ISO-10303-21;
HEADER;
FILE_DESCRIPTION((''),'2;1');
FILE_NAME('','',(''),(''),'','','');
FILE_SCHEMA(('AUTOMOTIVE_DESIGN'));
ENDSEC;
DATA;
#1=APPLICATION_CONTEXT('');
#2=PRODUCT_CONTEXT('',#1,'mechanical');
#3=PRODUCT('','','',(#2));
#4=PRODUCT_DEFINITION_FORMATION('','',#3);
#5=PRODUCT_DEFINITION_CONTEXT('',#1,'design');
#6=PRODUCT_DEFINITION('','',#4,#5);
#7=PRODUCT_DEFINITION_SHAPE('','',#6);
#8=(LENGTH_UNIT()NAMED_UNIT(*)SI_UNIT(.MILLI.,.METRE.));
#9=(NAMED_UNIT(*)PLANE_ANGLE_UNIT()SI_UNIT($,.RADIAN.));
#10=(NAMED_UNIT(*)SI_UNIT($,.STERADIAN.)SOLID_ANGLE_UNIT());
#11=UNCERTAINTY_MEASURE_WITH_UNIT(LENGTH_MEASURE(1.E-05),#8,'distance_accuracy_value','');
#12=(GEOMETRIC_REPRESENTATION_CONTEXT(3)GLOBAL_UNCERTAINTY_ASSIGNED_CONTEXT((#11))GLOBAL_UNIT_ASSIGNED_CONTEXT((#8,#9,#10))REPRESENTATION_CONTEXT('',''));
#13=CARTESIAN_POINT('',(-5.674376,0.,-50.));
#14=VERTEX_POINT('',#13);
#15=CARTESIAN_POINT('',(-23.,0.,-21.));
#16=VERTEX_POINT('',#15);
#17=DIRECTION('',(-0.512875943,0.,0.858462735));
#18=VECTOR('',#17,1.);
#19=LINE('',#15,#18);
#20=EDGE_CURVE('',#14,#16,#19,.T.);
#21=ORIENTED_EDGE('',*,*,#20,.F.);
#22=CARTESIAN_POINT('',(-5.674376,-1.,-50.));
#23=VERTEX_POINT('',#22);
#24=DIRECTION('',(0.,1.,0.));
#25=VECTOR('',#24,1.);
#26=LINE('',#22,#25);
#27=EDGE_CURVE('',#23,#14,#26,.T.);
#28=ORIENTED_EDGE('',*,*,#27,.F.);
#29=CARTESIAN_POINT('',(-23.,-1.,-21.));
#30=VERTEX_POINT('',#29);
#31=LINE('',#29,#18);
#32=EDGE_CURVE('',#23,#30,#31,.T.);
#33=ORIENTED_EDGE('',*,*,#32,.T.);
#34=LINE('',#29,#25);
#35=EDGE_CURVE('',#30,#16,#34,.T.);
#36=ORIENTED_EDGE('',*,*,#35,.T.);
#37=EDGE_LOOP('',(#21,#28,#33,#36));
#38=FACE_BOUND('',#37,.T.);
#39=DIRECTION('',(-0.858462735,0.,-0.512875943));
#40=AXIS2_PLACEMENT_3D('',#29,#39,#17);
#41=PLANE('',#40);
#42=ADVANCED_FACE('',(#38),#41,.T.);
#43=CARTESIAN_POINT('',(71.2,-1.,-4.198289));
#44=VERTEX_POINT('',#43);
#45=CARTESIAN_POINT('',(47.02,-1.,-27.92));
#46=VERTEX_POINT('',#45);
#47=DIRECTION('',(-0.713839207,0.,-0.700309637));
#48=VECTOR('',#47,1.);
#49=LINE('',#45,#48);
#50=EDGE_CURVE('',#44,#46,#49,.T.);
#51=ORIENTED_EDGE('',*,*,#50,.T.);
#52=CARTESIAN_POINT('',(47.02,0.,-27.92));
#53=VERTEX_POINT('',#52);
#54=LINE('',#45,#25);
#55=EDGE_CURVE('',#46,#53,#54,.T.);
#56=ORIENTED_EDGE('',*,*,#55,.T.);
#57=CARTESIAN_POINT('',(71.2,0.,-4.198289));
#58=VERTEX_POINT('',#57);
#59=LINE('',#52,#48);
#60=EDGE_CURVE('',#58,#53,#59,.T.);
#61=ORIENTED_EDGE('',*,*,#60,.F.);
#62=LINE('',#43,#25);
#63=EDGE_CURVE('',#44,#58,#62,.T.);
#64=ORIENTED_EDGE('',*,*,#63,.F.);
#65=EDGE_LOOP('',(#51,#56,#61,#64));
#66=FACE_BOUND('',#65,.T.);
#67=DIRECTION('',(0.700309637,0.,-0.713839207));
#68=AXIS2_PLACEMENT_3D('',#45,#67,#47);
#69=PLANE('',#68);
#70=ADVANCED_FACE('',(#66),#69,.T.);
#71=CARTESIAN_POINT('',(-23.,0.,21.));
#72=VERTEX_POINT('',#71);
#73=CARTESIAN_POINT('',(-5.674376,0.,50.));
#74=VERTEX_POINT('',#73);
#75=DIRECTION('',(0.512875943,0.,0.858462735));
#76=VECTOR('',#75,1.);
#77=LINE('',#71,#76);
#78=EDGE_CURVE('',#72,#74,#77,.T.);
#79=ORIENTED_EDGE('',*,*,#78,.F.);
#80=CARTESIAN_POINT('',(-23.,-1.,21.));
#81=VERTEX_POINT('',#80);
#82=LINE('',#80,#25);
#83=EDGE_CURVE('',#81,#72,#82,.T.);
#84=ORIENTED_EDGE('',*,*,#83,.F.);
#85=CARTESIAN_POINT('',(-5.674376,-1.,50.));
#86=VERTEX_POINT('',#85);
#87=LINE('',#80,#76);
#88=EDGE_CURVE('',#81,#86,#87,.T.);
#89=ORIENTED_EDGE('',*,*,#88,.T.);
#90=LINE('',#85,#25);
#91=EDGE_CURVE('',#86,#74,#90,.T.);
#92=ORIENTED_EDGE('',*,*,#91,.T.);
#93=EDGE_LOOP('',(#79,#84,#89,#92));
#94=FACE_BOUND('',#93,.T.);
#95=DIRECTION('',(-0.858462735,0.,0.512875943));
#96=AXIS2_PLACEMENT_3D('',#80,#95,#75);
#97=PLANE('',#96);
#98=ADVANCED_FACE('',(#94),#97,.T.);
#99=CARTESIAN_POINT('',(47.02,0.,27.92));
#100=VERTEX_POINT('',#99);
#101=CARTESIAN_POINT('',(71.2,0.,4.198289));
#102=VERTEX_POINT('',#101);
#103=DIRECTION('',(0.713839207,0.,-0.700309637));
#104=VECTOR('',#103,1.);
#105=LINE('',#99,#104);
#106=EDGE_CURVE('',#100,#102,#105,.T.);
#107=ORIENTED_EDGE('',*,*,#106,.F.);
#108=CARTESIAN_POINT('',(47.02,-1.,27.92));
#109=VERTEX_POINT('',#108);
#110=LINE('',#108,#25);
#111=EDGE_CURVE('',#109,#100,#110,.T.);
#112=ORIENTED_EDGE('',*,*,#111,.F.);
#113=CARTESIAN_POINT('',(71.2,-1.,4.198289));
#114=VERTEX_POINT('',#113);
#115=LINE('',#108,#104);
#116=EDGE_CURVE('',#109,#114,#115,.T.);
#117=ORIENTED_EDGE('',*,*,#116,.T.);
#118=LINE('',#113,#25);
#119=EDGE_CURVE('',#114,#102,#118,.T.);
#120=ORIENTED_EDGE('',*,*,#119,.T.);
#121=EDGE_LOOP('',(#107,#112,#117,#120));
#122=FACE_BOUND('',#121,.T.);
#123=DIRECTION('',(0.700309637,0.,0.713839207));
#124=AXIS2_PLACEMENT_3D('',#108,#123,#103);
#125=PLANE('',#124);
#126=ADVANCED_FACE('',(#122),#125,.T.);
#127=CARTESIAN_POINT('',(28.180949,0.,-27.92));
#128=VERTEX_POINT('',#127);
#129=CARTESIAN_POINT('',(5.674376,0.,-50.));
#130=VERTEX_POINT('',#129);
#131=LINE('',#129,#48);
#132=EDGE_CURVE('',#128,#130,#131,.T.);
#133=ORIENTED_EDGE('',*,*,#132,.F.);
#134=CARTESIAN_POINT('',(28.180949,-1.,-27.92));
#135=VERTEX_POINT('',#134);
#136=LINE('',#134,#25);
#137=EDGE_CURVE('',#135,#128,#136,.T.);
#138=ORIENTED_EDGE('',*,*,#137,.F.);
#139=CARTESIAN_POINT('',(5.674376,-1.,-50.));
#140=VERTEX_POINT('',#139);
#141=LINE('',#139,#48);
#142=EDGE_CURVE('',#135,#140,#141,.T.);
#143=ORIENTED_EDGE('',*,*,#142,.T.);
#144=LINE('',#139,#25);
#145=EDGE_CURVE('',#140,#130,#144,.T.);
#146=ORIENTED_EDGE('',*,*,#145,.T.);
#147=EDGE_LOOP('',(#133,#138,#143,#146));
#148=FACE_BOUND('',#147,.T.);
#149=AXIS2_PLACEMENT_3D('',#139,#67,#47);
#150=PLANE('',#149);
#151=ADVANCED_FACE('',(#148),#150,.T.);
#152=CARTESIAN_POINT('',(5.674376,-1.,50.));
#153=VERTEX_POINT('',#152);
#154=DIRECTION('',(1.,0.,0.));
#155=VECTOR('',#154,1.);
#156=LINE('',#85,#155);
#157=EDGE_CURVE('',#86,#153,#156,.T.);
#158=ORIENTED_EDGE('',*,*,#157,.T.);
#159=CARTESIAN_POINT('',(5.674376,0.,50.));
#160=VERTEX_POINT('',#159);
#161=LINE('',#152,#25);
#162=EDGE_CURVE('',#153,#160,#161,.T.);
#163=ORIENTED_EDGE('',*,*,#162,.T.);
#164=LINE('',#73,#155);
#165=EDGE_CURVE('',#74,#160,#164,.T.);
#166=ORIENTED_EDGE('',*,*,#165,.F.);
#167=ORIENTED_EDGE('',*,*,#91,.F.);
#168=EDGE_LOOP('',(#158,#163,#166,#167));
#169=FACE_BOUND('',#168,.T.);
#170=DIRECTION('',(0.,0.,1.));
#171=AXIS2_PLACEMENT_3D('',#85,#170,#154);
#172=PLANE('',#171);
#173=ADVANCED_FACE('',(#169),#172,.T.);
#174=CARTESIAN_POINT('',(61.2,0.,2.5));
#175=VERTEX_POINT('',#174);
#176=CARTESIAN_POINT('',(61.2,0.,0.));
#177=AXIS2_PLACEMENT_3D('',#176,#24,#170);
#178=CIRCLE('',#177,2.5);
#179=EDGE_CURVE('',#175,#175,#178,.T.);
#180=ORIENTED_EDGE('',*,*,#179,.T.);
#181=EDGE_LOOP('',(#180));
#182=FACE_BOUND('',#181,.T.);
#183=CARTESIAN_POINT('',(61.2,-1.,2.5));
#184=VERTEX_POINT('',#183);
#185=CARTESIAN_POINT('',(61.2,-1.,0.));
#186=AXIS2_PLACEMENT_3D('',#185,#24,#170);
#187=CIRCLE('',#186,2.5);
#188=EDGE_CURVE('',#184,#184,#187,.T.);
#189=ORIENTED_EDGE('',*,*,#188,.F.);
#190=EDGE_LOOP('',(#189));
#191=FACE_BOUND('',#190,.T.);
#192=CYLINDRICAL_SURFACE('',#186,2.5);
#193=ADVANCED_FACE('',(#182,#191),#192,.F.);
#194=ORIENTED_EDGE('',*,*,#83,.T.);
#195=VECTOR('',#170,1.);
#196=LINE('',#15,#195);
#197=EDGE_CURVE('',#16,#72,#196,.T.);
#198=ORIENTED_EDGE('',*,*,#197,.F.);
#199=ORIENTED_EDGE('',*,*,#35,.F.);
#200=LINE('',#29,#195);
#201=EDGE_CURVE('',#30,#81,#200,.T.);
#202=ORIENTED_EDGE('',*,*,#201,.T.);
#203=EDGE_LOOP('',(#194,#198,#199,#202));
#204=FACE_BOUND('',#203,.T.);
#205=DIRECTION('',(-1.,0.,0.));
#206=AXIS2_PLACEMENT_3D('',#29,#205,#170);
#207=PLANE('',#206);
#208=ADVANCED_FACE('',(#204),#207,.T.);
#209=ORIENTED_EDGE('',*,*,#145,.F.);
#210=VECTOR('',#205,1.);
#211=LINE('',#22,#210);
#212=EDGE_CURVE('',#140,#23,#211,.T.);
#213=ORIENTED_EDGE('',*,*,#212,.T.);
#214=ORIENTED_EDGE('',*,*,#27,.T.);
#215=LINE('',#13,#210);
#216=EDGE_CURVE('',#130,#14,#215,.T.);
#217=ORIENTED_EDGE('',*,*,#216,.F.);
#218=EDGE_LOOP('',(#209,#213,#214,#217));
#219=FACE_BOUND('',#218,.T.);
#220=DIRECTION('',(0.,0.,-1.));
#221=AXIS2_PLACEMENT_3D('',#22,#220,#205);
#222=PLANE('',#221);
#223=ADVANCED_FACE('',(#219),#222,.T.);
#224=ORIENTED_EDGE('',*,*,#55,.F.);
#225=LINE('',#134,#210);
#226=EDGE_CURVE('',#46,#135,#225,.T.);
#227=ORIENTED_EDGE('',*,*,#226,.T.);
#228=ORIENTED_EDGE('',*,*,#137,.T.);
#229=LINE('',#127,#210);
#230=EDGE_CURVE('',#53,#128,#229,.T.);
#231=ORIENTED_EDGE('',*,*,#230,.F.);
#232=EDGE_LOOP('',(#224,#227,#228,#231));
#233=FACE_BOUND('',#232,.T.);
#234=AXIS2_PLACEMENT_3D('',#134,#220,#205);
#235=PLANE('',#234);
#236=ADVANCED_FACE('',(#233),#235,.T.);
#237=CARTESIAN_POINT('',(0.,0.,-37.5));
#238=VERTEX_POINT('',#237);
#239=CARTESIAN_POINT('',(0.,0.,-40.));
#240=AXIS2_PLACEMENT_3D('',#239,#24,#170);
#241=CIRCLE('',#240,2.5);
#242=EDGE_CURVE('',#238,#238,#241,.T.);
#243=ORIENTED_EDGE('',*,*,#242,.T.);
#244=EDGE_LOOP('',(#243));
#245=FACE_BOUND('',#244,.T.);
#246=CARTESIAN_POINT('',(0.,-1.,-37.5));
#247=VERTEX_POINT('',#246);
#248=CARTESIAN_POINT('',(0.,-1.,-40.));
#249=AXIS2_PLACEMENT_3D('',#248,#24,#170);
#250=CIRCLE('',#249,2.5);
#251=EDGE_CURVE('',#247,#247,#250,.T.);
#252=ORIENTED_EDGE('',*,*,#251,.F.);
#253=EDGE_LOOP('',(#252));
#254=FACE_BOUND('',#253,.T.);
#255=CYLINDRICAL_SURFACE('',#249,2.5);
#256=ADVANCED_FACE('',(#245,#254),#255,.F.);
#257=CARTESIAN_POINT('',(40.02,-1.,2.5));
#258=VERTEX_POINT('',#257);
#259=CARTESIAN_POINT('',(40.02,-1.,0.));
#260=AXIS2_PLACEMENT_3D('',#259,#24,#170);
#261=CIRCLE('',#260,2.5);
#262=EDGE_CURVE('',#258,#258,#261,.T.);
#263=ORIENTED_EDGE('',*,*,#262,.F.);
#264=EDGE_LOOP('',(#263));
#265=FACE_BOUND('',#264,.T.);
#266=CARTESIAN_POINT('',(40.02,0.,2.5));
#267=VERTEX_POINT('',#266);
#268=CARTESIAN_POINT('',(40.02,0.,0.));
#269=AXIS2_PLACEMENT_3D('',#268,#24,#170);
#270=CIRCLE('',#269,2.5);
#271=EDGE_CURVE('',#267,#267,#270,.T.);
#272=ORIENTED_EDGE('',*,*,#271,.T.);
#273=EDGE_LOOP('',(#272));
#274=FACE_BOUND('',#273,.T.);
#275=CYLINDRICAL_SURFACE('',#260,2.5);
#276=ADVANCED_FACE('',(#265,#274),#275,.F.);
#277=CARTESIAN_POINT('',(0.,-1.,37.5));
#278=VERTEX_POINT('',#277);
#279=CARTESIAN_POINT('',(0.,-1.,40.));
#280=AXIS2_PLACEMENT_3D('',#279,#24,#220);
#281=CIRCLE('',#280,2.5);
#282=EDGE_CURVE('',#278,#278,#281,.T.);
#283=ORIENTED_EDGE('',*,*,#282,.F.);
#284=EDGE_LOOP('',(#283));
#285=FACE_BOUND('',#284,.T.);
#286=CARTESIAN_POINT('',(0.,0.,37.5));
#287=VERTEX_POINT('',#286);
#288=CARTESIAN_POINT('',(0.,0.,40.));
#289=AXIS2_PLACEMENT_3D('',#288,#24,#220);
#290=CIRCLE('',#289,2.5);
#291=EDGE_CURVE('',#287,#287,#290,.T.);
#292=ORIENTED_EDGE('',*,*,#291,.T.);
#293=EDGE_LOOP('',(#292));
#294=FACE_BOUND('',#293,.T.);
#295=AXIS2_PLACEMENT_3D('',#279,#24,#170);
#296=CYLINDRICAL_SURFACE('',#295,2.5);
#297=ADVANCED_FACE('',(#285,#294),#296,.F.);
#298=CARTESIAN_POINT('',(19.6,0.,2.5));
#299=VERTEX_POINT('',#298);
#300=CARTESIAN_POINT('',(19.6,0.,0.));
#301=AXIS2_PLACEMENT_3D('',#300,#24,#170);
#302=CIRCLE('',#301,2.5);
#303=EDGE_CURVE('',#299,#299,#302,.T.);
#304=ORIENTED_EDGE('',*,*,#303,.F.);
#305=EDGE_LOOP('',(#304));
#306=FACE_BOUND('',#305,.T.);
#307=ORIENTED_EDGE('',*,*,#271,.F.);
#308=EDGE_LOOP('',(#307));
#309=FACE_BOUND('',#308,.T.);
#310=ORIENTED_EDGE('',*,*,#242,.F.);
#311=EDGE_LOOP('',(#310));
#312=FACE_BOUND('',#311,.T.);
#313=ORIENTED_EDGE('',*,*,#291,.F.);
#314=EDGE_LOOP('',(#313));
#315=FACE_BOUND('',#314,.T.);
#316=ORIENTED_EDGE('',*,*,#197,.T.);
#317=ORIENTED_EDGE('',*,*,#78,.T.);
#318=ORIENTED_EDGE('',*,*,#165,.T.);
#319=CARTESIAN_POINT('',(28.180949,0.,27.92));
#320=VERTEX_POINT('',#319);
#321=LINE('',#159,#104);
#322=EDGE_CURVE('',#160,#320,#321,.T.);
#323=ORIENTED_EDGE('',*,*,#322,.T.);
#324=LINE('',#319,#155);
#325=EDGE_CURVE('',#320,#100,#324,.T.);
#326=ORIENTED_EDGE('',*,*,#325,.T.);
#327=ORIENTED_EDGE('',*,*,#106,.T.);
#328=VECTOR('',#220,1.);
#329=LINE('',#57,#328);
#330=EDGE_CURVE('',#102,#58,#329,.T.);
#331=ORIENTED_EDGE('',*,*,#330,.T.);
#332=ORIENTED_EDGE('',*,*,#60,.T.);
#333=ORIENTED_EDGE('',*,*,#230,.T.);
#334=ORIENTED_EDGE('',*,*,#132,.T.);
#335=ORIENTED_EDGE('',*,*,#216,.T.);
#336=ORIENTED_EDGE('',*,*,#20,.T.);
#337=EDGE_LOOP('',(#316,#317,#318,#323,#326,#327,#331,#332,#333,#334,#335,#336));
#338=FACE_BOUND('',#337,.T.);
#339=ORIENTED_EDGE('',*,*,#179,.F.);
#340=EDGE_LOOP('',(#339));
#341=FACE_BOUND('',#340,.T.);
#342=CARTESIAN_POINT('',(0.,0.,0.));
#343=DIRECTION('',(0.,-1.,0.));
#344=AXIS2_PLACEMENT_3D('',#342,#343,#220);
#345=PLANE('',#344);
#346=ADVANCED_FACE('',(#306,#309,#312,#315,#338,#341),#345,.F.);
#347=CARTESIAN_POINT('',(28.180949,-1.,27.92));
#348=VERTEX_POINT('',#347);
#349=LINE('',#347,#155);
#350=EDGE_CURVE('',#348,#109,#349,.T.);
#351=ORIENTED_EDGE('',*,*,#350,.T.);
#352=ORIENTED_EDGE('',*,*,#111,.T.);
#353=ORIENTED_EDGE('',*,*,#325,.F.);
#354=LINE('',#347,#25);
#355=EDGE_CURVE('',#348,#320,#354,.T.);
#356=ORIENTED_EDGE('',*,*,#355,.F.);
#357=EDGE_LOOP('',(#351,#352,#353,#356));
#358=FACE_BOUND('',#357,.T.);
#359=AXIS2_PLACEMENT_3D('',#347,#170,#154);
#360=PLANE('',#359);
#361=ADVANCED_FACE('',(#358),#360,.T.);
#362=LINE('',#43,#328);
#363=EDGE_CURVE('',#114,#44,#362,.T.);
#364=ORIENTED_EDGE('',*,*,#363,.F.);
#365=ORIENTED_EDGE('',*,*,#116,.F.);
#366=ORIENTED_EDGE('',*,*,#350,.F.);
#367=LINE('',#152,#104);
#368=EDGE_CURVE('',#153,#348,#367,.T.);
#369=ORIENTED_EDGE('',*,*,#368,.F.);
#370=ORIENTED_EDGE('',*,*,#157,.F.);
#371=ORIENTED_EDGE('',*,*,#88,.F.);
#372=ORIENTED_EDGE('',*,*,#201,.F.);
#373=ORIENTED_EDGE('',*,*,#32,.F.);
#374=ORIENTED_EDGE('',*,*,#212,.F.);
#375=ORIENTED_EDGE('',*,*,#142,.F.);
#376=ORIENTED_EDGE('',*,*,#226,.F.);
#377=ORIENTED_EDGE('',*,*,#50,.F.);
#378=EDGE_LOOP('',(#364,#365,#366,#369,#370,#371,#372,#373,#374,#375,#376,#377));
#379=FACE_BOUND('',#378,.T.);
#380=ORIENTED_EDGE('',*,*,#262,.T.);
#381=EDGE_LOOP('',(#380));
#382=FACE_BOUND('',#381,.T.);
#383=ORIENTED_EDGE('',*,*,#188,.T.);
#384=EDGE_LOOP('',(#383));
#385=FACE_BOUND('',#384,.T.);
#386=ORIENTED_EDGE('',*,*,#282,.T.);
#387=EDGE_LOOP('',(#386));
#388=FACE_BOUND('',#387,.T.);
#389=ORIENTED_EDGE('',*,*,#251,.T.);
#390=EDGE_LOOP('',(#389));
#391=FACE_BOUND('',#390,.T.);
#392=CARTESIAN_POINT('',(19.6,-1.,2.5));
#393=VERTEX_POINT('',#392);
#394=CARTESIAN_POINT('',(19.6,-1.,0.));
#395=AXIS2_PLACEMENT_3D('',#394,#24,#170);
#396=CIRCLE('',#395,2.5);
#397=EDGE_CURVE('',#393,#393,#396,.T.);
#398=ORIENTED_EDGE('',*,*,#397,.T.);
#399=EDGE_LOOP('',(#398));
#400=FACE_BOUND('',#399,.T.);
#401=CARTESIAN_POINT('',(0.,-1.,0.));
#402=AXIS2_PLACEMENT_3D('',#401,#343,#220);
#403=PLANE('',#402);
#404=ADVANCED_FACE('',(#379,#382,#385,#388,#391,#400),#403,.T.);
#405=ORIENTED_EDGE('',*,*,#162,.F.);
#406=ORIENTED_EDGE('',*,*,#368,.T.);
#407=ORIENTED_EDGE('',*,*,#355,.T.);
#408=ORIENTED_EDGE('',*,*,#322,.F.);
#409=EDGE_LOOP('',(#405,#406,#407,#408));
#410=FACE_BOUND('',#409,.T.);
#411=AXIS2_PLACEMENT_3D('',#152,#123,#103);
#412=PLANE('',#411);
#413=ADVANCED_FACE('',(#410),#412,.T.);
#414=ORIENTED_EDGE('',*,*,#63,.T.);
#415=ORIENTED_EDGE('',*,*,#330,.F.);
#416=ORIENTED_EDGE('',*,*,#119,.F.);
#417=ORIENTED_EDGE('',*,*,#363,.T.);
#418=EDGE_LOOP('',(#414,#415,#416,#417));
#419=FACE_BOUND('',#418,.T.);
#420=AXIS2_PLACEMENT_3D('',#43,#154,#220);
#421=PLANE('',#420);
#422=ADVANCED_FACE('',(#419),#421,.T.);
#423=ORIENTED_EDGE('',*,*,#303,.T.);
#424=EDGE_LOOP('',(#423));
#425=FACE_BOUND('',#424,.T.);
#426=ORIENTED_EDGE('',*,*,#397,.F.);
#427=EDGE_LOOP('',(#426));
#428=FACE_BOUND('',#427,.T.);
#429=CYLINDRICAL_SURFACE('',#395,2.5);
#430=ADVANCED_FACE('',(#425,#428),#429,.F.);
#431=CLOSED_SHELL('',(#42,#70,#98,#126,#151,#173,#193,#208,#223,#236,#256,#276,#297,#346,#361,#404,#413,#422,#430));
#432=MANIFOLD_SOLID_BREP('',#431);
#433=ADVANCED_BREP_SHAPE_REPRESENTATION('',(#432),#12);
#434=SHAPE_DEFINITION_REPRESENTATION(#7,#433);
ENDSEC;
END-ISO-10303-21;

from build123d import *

# Parameters (mm, degrees)
SKETCH1_R          = 2.5
BASE_FLANGE1_DEPTH = 1


# Sheet-metal steps are written as plain solids
with BuildPart() as part:
    # Sketch1 → Base-Flange1 (new body)
    with BuildSketch(Plane(origin=(0, 0, 0), x_dir=(1, 0, 0), z_dir=(0, 1, 0))):
        Polygon((5.674376272, 50), (28.180948875, 27.92), (47.02, 27.92), (71.2, 4.198289483), (71.2, -4.198289483), (47.02, -27.92), (28.180948875, -27.92), (5.674376272, -50), (-5.674376272, -50), (-23, -21), (-23, 21), (-5.674376272, 50), align=None)
        with Locations(Location((0, 40, 0), (0, 0, 270))):
            Circle(SKETCH1_R, mode=Mode.SUBTRACT)
        with Locations(Location((0, -40, 0), (0, 0, 90))):
            Circle(SKETCH1_R, mode=Mode.SUBTRACT)
        with Locations(Location((61.2, 0, 0), (0, 0, 270))):
            Circle(SKETCH1_R, mode=Mode.SUBTRACT)
        with Locations(Location((19.6, 0, 0), (0, 0, 270))):
            Circle(SKETCH1_R, mode=Mode.SUBTRACT)
        with Locations(Location((40.02, 0, 0), (0, 0, 270))):
            Circle(SKETCH1_R, mode=Mode.SUBTRACT)
    extrude(amount=-BASE_FLANGE1_DEPTH)


solid = part.part
